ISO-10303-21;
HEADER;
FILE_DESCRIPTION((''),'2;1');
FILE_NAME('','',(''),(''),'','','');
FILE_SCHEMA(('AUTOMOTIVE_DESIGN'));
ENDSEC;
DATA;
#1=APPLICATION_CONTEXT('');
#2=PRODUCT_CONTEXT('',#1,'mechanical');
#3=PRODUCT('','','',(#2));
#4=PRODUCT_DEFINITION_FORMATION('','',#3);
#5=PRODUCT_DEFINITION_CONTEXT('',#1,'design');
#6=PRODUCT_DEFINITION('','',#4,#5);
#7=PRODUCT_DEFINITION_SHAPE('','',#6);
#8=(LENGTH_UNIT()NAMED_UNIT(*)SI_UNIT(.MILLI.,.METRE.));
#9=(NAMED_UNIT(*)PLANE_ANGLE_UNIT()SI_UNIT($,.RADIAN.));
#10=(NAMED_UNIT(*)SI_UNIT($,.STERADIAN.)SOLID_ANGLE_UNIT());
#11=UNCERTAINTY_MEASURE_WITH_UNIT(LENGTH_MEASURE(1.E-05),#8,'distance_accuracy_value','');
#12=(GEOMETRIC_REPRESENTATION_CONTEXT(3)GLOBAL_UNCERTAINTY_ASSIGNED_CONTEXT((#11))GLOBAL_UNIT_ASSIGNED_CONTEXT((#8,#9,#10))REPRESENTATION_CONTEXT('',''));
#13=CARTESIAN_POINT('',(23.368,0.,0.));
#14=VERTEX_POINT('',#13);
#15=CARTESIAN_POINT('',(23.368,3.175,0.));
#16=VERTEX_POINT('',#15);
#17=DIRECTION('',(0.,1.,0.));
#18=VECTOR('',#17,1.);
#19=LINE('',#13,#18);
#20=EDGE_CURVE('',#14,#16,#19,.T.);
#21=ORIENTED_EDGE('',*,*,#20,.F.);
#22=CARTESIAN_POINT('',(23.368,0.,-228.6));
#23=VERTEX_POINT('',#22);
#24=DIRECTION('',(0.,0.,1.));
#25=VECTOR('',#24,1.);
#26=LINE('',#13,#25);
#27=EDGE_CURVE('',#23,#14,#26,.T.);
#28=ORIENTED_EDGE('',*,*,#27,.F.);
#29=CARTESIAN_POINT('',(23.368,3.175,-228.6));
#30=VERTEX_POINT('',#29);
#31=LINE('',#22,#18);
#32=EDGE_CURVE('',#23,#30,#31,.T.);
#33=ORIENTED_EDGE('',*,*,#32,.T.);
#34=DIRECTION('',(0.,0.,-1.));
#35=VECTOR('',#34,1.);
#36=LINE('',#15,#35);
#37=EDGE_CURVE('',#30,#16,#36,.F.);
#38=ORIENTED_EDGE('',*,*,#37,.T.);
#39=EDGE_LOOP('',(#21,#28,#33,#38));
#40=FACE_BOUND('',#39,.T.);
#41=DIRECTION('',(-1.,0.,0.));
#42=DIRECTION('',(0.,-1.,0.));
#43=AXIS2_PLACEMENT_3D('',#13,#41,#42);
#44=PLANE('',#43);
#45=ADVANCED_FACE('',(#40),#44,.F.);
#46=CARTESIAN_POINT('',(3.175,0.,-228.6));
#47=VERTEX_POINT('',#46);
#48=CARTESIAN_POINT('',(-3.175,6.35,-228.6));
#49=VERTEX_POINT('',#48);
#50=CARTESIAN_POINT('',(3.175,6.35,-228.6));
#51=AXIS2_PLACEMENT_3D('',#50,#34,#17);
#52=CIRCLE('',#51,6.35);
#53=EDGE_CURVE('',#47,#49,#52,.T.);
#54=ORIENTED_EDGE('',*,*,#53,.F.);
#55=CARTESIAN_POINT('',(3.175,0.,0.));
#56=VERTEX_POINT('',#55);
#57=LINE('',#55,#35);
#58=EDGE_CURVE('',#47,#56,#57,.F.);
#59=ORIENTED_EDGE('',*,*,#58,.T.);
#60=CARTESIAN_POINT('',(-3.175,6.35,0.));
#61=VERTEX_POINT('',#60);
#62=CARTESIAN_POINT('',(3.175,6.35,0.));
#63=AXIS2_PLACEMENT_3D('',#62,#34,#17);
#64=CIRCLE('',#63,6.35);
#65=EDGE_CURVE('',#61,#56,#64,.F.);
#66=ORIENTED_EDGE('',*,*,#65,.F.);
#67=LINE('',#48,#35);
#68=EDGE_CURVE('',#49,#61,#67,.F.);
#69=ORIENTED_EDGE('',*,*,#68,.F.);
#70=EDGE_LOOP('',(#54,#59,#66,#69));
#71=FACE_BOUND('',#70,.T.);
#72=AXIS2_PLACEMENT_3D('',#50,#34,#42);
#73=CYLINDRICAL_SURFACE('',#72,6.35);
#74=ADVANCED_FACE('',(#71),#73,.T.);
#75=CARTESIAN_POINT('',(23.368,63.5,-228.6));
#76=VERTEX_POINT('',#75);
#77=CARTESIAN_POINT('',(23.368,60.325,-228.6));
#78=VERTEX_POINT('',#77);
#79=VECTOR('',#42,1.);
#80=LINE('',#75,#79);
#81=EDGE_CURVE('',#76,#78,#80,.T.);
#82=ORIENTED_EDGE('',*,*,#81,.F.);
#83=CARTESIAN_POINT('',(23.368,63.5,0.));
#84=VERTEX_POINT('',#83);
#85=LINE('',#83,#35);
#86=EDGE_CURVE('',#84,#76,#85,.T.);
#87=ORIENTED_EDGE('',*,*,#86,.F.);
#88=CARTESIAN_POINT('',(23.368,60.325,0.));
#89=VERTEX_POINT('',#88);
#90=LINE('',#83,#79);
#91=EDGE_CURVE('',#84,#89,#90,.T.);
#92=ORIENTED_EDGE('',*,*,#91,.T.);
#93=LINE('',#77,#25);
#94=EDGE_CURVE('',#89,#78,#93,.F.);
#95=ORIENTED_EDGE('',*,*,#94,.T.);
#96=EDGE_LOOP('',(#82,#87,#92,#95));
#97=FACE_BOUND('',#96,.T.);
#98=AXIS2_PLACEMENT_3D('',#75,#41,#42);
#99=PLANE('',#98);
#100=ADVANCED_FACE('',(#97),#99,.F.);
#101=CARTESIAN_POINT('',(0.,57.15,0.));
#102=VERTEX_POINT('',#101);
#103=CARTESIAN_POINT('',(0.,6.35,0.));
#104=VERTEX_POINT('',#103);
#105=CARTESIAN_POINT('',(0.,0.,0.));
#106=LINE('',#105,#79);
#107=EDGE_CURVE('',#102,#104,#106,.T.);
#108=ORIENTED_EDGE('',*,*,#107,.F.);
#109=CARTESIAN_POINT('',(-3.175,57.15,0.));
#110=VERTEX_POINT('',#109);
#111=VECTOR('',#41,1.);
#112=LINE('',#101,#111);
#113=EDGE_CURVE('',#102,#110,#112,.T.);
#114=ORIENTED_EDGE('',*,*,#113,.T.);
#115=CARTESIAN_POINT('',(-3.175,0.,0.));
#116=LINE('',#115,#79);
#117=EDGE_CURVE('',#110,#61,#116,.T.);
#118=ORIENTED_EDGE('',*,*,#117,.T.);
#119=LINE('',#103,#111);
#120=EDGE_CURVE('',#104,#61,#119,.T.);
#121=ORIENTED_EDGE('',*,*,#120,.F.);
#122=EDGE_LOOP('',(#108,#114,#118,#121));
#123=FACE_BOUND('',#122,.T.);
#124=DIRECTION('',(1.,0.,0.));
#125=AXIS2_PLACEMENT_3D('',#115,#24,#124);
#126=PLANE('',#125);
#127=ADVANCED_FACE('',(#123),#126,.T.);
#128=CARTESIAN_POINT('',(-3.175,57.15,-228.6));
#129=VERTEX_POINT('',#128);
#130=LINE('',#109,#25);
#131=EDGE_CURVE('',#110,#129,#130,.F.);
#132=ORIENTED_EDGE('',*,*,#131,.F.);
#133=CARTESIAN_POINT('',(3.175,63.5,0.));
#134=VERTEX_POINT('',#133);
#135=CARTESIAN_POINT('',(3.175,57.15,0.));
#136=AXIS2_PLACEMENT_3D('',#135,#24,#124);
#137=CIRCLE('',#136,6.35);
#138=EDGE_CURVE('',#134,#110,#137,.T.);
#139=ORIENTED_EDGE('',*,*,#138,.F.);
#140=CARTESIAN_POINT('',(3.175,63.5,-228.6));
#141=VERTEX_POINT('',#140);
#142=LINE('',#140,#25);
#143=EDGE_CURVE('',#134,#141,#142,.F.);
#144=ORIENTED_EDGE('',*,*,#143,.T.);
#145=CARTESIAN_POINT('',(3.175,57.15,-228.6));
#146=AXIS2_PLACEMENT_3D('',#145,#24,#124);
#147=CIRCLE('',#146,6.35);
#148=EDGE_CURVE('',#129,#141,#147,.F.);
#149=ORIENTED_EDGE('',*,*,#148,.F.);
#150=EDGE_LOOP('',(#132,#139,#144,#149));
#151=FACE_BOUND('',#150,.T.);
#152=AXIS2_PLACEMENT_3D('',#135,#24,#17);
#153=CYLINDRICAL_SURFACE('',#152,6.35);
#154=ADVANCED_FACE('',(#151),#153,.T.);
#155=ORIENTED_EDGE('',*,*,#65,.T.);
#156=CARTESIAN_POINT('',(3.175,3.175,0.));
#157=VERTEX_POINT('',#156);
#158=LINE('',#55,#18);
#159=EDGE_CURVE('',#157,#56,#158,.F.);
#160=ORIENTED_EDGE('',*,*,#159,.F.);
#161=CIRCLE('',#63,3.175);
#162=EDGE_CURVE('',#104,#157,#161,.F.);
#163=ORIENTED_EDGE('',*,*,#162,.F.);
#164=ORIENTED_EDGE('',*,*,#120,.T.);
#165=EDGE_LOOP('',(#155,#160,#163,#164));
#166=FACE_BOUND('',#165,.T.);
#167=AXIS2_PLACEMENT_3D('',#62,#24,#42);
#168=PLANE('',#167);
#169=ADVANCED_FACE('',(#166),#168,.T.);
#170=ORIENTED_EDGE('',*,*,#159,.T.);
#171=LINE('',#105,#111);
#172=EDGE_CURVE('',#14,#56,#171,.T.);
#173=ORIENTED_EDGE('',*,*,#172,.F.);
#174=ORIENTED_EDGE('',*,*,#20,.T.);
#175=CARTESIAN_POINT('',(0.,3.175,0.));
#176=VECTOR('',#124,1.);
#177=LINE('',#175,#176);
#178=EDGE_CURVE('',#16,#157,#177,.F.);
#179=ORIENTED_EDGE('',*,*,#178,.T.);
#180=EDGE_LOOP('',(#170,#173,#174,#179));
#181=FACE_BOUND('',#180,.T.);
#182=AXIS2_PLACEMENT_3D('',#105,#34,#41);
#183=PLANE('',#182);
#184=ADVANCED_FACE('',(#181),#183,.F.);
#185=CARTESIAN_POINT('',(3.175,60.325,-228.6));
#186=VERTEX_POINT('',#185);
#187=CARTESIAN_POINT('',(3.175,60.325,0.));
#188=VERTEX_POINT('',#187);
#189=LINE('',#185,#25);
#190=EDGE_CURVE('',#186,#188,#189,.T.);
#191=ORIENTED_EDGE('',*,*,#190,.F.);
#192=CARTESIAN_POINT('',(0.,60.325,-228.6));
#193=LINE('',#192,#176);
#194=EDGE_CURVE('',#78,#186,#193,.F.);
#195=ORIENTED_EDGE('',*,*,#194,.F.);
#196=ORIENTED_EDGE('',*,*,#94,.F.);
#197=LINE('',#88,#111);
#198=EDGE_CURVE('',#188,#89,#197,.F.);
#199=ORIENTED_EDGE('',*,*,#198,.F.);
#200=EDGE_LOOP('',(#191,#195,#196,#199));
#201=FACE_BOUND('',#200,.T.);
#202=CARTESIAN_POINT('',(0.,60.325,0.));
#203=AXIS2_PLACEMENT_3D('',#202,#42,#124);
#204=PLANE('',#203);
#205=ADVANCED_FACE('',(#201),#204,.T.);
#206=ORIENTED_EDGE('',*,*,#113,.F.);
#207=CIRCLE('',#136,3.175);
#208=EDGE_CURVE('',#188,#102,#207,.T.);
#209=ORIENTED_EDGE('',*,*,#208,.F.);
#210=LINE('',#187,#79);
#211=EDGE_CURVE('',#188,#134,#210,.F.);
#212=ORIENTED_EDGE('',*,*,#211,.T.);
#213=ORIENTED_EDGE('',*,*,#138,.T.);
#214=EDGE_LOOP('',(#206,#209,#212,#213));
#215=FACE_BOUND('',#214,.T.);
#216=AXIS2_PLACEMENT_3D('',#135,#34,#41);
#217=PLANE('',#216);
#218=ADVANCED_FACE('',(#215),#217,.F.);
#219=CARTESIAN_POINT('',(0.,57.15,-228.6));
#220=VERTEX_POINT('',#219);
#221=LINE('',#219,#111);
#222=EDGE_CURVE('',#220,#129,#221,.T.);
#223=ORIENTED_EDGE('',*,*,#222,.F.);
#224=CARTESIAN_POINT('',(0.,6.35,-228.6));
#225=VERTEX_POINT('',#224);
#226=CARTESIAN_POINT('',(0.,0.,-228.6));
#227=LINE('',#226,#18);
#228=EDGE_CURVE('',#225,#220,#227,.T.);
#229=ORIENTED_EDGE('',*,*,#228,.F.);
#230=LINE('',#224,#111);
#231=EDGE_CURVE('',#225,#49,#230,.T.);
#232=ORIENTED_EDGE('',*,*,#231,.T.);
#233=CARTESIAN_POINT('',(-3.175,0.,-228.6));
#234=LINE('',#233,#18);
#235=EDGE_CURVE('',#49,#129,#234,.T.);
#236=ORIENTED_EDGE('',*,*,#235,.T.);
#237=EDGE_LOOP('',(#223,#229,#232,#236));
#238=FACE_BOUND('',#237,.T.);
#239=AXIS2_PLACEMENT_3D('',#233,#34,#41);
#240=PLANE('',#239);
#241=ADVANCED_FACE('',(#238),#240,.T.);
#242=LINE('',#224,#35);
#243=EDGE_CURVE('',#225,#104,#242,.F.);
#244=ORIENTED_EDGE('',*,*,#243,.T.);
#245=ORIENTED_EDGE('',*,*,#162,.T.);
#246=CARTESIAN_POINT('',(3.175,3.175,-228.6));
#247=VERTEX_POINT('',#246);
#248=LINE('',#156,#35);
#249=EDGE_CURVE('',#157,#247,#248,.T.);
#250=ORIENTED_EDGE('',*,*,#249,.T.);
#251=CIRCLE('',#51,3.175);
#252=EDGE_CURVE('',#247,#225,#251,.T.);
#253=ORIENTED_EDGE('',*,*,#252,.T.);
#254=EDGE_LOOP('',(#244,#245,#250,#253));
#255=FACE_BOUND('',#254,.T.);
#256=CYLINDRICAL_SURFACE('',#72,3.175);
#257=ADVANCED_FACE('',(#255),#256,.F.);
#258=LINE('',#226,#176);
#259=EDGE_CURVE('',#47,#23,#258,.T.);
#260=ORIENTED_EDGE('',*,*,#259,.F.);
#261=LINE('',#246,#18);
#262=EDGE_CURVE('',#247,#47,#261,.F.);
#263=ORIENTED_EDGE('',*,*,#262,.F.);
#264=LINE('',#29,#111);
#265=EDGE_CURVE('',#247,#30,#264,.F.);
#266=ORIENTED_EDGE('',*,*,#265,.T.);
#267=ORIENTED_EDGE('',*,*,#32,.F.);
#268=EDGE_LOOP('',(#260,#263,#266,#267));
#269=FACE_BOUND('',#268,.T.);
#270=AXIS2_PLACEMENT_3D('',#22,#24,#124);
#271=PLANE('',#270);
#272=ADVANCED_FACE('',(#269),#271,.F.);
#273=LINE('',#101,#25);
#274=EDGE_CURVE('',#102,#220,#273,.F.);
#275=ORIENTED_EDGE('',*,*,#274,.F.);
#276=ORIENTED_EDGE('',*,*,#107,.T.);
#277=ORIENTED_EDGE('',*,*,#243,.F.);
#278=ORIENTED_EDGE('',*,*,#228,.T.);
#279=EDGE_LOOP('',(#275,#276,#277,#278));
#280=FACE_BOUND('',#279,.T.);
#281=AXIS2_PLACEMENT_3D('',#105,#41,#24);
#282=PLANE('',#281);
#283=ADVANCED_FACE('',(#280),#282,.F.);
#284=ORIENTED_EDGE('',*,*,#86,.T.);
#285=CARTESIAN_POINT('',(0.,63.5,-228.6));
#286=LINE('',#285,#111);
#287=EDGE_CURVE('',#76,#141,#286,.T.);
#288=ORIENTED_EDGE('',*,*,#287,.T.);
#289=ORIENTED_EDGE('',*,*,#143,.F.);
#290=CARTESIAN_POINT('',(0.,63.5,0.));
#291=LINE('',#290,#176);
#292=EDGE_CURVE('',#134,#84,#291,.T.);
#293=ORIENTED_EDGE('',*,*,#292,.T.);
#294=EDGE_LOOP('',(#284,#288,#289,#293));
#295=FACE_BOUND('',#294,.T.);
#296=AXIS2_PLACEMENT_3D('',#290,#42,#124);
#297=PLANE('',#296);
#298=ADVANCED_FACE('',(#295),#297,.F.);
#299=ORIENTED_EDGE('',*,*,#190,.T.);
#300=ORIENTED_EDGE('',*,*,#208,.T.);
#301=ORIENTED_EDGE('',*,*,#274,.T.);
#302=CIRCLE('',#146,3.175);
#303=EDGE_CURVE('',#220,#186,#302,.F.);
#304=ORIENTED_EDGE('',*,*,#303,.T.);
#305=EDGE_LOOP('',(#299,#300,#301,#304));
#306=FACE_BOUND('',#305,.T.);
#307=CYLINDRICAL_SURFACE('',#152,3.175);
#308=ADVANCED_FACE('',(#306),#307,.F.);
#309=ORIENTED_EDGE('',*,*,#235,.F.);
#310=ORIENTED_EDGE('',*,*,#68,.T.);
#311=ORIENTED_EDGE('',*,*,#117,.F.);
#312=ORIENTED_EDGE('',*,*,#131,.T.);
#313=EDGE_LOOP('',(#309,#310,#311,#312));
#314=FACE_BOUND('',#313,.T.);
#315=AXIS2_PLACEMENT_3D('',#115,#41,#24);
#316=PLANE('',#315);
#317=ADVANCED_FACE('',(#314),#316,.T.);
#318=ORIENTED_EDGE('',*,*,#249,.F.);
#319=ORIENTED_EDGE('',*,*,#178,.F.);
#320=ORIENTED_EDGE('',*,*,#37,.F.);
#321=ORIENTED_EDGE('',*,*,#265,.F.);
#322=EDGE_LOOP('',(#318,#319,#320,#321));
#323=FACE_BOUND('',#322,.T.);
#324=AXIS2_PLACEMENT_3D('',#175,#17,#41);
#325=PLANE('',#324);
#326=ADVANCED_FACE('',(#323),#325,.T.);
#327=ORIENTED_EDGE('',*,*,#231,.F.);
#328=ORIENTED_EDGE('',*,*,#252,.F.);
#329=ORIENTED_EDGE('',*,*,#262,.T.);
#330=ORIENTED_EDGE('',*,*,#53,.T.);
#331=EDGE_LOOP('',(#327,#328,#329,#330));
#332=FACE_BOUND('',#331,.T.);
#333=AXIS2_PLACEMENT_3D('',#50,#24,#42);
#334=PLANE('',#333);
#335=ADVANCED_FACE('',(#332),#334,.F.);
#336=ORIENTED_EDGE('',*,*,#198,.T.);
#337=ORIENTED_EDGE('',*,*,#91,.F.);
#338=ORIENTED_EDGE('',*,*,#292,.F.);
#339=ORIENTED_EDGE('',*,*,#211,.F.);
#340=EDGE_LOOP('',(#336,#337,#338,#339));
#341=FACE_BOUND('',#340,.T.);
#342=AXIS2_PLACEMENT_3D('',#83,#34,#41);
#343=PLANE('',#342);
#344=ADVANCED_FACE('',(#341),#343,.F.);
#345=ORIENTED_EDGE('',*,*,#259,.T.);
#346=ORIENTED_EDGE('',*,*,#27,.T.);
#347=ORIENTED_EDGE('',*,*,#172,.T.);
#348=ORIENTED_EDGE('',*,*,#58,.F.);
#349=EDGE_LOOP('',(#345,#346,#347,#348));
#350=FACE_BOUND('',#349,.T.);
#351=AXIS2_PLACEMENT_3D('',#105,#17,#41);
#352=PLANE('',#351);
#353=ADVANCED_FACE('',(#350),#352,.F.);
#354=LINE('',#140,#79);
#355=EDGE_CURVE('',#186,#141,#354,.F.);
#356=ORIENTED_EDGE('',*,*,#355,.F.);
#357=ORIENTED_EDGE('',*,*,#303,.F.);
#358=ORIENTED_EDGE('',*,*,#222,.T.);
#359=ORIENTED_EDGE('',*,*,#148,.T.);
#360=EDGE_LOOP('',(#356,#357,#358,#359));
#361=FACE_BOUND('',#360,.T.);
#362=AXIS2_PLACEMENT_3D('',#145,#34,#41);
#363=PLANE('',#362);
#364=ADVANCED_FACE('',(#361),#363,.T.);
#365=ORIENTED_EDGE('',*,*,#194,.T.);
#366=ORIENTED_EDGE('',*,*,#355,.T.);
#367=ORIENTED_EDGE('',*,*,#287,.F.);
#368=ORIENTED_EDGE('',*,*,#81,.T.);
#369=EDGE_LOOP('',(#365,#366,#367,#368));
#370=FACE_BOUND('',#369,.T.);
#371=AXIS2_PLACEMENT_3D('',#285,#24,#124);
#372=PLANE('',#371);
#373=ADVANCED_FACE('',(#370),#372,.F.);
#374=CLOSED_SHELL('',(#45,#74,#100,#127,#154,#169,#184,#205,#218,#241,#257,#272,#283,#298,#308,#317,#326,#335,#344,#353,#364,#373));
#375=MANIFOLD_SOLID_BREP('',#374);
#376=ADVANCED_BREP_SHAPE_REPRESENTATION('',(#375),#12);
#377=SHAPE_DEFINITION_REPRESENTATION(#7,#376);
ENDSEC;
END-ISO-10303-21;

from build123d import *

# Parameters (mm, degrees)
SKETCH1_W                      = 228.6
SKETCH1_H                      = 63.5
BASE_FLANGE1_DEPTH             = 3.175
EDGE_FLANGE1_STRIP_W           = 19.05
EDGE_FLANGE1_STRIP_H           = 3.175
EDGE_FLANGE1_STRIP_CUT_DEPTH   = 228.6
EDGE_FLANGE1_STRIP_2_W         = 19.05
EDGE_FLANGE1_STRIP_2_H         = 3.175
EDGE_FLANGE1_STRIP_CUT_2_DEPTH = 228.6
EDGE_FLANGE1_DEPTH             = 228.6
EDGE_FLANGE1_BEND_DEPTH        = 228.6


# Sheet-metal steps are written as plain solids
with BuildPart() as part:
    # Sketch1 → Base-Flange1 (new body)
    with BuildSketch(Plane(origin=(0, 0, 0), x_dir=(0, 0, -1), z_dir=(1, 0, 0))):
        with Locations((114.3, 31.75)):
            Rectangle(SKETCH1_W, SKETCH1_H)
    extrude(amount=-BASE_FLANGE1_DEPTH)

    # Edge-Flange1 strip (across the edge) → Edge-Flange1 strip cut (cut)
    with BuildSketch(Plane(origin=(0, 63.5, -228.6), x_dir=(0, -1, 0), z_dir=(0, 0, 1))):
        with Locations((-3.175, -1.5875)):
            Rectangle(EDGE_FLANGE1_STRIP_W, EDGE_FLANGE1_STRIP_H)
    extrude(amount=EDGE_FLANGE1_STRIP_CUT_DEPTH, mode=Mode.SUBTRACT)

    # Edge-Flange1 strip 2 (across the edge) → Edge-Flange1 strip cut 2 (cut)
    with BuildSketch(Plane.YX):
        with Locations((-3.175, -1.5875)):
            Rectangle(EDGE_FLANGE1_STRIP_2_W, EDGE_FLANGE1_STRIP_2_H)
    extrude(amount=EDGE_FLANGE1_STRIP_CUT_2_DEPTH, mode=Mode.SUBTRACT)

    # Edge-Flange1 section (across the edge) → Edge-Flange1 (add)
    with BuildSketch(Plane(origin=(0, 63.5, -228.6), x_dir=(0, -1, 0), z_dir=(0, 0, 1))):
        with BuildLine():
            Line((0, 3.175), (0, 23.368))
            Line((0, 23.368), (3.175, 23.368))
            Line((3.175, 23.368), (3.175, 3.175))
            ThreePointArc((3.175, 3.175), (4.10493597, 0.92993597), (6.35, 0))
            Line((6.35, 0), (6.35, -3.175))
            ThreePointArc((6.35, -3.175), (1.859871939, -1.315128061), (0, 3.175))
        make_face()
    extrude(amount=EDGE_FLANGE1_DEPTH)

    # Edge-Flange1 section 2 (across the edge) → Edge-Flange1 bend (add)
    with BuildSketch(Plane.YX):
        with BuildLine():
            Line((0, 3.175), (0, 23.368))
            Line((0, 23.368), (3.175, 23.368))
            Line((3.175, 23.368), (3.175, 3.175))
            ThreePointArc((3.175, 3.175), (4.10493597, 0.92993597), (6.35, 0))
            Line((6.35, 0), (6.35, -3.175))
            ThreePointArc((6.35, -3.175), (1.859871939, -1.315128061), (0, 3.175))
        make_face()
    extrude(amount=EDGE_FLANGE1_BEND_DEPTH)


solid = part.part
